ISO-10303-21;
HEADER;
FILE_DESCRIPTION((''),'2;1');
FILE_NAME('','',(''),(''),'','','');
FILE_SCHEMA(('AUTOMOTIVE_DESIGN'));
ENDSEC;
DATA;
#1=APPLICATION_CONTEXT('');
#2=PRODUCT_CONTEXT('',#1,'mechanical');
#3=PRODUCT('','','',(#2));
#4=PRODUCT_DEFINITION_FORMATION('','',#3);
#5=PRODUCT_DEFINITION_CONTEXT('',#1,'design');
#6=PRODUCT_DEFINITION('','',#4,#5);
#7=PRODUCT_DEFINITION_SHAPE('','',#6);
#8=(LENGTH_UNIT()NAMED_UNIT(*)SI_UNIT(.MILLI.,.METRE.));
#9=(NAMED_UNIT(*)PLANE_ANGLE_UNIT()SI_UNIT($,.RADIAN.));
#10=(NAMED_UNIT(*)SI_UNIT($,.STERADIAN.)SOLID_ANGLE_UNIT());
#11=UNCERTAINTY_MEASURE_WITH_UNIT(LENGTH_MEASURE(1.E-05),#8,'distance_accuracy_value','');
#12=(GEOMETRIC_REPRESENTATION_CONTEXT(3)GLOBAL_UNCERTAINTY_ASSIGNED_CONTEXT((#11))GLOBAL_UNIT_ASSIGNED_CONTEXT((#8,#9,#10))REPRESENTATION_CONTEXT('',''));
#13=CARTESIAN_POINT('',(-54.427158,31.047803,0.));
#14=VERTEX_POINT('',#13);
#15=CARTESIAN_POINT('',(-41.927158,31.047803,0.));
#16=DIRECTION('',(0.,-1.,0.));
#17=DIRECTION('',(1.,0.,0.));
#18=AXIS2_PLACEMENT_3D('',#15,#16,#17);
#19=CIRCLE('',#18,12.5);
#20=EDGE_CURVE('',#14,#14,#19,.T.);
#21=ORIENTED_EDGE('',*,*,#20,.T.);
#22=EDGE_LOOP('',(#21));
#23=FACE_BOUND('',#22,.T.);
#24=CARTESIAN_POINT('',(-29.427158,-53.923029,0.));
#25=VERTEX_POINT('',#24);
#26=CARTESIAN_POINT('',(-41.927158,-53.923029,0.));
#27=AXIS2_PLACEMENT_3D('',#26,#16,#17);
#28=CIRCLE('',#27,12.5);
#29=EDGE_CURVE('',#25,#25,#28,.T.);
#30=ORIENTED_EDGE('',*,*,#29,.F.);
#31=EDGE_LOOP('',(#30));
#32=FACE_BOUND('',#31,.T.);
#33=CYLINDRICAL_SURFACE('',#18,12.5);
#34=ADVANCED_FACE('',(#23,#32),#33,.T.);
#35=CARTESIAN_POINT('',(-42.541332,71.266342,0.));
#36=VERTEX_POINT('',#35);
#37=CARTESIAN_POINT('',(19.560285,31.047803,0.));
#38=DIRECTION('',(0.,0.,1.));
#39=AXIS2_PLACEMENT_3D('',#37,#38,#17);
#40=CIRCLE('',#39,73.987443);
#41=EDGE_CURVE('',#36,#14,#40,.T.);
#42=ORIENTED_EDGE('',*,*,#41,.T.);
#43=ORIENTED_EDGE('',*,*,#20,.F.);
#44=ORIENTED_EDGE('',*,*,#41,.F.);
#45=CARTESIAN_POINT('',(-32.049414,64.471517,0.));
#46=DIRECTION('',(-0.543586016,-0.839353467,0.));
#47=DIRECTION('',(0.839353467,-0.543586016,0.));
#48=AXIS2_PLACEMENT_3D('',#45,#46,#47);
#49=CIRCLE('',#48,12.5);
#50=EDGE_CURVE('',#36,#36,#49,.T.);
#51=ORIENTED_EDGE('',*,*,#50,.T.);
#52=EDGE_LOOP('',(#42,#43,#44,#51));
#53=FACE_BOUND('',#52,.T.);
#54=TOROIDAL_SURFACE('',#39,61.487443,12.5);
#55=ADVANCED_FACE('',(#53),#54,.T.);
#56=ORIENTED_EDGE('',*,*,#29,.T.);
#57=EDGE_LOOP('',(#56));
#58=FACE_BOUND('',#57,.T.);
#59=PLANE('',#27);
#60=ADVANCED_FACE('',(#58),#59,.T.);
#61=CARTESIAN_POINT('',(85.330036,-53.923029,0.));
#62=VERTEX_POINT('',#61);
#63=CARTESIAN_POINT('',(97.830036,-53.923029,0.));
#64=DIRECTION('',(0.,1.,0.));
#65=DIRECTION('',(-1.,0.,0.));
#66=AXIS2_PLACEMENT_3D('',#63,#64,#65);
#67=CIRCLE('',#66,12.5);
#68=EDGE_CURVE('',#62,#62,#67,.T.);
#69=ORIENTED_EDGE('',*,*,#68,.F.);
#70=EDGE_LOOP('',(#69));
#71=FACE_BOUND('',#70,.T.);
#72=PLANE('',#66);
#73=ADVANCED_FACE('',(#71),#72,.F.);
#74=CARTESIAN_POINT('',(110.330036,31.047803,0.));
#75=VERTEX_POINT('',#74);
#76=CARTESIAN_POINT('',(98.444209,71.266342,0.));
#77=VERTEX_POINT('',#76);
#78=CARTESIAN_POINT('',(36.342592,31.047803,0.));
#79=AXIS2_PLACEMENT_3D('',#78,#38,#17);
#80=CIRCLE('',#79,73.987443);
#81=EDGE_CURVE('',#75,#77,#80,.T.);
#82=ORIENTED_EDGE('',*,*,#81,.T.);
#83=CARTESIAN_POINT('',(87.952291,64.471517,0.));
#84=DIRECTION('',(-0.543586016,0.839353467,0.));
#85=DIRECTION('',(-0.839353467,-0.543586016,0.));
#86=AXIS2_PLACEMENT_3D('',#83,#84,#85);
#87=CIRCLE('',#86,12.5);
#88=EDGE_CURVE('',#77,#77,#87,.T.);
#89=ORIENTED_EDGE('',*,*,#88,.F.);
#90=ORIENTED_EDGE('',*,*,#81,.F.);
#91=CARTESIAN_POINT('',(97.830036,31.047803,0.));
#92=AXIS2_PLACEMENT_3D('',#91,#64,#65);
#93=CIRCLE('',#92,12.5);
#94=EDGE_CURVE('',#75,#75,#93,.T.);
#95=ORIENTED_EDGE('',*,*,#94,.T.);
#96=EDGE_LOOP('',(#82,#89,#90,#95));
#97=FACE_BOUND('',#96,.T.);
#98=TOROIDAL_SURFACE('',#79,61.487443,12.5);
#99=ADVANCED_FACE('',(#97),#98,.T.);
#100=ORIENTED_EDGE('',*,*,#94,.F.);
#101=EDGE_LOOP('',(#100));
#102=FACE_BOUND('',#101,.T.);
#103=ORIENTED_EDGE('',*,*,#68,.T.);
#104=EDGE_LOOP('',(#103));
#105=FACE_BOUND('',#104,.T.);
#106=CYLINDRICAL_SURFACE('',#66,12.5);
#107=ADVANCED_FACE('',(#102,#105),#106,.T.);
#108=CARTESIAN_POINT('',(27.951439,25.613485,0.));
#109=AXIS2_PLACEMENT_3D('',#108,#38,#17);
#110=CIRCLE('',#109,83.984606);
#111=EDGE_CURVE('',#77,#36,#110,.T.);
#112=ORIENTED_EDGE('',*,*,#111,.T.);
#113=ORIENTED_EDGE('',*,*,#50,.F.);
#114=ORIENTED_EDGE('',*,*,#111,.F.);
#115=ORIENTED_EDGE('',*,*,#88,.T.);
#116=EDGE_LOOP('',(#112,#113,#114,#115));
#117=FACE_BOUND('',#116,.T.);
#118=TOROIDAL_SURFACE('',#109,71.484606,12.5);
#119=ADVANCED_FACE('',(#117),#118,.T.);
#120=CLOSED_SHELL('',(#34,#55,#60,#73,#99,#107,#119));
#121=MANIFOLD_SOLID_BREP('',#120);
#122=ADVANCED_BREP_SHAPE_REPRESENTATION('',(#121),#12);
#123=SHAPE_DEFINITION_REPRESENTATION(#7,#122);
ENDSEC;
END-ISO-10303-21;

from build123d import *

# Parameters (mm, degrees)
SWEEP1_OUTLINE_R   = 5
SWEEP1_DEPTH       = 33.988332717
SWEEP1_2_OUTLINE_R = 5
SWEEP1_2_ANGLE     = 32.92809
SWEEP1_3_OUTLINE_R = 5
SWEEP1_3_ANGLE     = 114.14382
SWEEP1_4_OUTLINE_R = 5
SWEEP1_4_ANGLE     = 32.92809
SCALE7_SCALE       = 2.5


with BuildPart() as part:
    # Sweep1: read off the stored shape, not the designer's step
    # Sweep1 outline → Sweep1 (new body)
    with BuildSketch(Plane(origin=(0, 0, 0), x_dir=(1, 0, 0), z_dir=(0, 1, 0))):
        with Locations((55.902877487, 0)):
            Circle(SWEEP1_OUTLINE_R)
        Circle(SWEEP1_OUTLINE_R)
    extrude(amount=SWEEP1_DEPTH)



with BuildPart() as body_2:
    # Sweep1 2 outline → Sweep1 2 (revolve)
    with BuildSketch(Plane(origin=(31.307900209, 33.988332717, 0), x_dir=(1, 0, 0), z_dir=(0, -1, 0))):
        with Locations((24.594977278, 0)):
            Circle(SWEEP1_2_OUTLINE_R)
    revolve(axis=Axis((31.307900209, 33.988332717, 0), (0, 0, 1)), revolution_arc=SWEEP1_2_ANGLE)

    # Sweep1 3 outline → Sweep1 3 (revolve)
    with BuildSketch(Plane(origin=(27.951438743, 31.814605451, 0), x_dir=(0.8393534671240316, 0.5435860164011462, 0), z_dir=(0.5435860164011462, -0.8393534671240316, 0))):
        with Locations((28.593842592, 0)):
            Circle(SWEEP1_3_OUTLINE_R)
    revolve(axis=Axis((27.951438743, 31.814605451, 0), (0, 0, 1)), revolution_arc=SWEEP1_3_ANGLE)


with BuildPart() as part_1:
    add(part.part)

    add(body_2.part)  # Sweep1 4 merges body 2
    # Sweep1 4 outline → Sweep1 4 (revolve)
    with BuildSketch(Plane(origin=(24.594977278, 33.988332717, 0), x_dir=(-0.8393534671240301, 0.5435860164011485, 0), z_dir=(0.5435860164011485, 0.8393534671240301, 0))):
        with Locations((24.594977278, 0)):
            Circle(SWEEP1_4_OUTLINE_R)
    revolve(axis=Axis((24.594977278, 33.988332717, 0), (0, 0, 1)), revolution_arc=SWEEP1_4_ANGLE)


with BuildPart() as part_2:
    # Scale7: scaled about (27.951438772, 35.9486859, 0)
    add(part_1.part.scale(SCALE7_SCALE).moved(Location((-41.927158158, -53.92302885, 0))))


solid = part_2.part
